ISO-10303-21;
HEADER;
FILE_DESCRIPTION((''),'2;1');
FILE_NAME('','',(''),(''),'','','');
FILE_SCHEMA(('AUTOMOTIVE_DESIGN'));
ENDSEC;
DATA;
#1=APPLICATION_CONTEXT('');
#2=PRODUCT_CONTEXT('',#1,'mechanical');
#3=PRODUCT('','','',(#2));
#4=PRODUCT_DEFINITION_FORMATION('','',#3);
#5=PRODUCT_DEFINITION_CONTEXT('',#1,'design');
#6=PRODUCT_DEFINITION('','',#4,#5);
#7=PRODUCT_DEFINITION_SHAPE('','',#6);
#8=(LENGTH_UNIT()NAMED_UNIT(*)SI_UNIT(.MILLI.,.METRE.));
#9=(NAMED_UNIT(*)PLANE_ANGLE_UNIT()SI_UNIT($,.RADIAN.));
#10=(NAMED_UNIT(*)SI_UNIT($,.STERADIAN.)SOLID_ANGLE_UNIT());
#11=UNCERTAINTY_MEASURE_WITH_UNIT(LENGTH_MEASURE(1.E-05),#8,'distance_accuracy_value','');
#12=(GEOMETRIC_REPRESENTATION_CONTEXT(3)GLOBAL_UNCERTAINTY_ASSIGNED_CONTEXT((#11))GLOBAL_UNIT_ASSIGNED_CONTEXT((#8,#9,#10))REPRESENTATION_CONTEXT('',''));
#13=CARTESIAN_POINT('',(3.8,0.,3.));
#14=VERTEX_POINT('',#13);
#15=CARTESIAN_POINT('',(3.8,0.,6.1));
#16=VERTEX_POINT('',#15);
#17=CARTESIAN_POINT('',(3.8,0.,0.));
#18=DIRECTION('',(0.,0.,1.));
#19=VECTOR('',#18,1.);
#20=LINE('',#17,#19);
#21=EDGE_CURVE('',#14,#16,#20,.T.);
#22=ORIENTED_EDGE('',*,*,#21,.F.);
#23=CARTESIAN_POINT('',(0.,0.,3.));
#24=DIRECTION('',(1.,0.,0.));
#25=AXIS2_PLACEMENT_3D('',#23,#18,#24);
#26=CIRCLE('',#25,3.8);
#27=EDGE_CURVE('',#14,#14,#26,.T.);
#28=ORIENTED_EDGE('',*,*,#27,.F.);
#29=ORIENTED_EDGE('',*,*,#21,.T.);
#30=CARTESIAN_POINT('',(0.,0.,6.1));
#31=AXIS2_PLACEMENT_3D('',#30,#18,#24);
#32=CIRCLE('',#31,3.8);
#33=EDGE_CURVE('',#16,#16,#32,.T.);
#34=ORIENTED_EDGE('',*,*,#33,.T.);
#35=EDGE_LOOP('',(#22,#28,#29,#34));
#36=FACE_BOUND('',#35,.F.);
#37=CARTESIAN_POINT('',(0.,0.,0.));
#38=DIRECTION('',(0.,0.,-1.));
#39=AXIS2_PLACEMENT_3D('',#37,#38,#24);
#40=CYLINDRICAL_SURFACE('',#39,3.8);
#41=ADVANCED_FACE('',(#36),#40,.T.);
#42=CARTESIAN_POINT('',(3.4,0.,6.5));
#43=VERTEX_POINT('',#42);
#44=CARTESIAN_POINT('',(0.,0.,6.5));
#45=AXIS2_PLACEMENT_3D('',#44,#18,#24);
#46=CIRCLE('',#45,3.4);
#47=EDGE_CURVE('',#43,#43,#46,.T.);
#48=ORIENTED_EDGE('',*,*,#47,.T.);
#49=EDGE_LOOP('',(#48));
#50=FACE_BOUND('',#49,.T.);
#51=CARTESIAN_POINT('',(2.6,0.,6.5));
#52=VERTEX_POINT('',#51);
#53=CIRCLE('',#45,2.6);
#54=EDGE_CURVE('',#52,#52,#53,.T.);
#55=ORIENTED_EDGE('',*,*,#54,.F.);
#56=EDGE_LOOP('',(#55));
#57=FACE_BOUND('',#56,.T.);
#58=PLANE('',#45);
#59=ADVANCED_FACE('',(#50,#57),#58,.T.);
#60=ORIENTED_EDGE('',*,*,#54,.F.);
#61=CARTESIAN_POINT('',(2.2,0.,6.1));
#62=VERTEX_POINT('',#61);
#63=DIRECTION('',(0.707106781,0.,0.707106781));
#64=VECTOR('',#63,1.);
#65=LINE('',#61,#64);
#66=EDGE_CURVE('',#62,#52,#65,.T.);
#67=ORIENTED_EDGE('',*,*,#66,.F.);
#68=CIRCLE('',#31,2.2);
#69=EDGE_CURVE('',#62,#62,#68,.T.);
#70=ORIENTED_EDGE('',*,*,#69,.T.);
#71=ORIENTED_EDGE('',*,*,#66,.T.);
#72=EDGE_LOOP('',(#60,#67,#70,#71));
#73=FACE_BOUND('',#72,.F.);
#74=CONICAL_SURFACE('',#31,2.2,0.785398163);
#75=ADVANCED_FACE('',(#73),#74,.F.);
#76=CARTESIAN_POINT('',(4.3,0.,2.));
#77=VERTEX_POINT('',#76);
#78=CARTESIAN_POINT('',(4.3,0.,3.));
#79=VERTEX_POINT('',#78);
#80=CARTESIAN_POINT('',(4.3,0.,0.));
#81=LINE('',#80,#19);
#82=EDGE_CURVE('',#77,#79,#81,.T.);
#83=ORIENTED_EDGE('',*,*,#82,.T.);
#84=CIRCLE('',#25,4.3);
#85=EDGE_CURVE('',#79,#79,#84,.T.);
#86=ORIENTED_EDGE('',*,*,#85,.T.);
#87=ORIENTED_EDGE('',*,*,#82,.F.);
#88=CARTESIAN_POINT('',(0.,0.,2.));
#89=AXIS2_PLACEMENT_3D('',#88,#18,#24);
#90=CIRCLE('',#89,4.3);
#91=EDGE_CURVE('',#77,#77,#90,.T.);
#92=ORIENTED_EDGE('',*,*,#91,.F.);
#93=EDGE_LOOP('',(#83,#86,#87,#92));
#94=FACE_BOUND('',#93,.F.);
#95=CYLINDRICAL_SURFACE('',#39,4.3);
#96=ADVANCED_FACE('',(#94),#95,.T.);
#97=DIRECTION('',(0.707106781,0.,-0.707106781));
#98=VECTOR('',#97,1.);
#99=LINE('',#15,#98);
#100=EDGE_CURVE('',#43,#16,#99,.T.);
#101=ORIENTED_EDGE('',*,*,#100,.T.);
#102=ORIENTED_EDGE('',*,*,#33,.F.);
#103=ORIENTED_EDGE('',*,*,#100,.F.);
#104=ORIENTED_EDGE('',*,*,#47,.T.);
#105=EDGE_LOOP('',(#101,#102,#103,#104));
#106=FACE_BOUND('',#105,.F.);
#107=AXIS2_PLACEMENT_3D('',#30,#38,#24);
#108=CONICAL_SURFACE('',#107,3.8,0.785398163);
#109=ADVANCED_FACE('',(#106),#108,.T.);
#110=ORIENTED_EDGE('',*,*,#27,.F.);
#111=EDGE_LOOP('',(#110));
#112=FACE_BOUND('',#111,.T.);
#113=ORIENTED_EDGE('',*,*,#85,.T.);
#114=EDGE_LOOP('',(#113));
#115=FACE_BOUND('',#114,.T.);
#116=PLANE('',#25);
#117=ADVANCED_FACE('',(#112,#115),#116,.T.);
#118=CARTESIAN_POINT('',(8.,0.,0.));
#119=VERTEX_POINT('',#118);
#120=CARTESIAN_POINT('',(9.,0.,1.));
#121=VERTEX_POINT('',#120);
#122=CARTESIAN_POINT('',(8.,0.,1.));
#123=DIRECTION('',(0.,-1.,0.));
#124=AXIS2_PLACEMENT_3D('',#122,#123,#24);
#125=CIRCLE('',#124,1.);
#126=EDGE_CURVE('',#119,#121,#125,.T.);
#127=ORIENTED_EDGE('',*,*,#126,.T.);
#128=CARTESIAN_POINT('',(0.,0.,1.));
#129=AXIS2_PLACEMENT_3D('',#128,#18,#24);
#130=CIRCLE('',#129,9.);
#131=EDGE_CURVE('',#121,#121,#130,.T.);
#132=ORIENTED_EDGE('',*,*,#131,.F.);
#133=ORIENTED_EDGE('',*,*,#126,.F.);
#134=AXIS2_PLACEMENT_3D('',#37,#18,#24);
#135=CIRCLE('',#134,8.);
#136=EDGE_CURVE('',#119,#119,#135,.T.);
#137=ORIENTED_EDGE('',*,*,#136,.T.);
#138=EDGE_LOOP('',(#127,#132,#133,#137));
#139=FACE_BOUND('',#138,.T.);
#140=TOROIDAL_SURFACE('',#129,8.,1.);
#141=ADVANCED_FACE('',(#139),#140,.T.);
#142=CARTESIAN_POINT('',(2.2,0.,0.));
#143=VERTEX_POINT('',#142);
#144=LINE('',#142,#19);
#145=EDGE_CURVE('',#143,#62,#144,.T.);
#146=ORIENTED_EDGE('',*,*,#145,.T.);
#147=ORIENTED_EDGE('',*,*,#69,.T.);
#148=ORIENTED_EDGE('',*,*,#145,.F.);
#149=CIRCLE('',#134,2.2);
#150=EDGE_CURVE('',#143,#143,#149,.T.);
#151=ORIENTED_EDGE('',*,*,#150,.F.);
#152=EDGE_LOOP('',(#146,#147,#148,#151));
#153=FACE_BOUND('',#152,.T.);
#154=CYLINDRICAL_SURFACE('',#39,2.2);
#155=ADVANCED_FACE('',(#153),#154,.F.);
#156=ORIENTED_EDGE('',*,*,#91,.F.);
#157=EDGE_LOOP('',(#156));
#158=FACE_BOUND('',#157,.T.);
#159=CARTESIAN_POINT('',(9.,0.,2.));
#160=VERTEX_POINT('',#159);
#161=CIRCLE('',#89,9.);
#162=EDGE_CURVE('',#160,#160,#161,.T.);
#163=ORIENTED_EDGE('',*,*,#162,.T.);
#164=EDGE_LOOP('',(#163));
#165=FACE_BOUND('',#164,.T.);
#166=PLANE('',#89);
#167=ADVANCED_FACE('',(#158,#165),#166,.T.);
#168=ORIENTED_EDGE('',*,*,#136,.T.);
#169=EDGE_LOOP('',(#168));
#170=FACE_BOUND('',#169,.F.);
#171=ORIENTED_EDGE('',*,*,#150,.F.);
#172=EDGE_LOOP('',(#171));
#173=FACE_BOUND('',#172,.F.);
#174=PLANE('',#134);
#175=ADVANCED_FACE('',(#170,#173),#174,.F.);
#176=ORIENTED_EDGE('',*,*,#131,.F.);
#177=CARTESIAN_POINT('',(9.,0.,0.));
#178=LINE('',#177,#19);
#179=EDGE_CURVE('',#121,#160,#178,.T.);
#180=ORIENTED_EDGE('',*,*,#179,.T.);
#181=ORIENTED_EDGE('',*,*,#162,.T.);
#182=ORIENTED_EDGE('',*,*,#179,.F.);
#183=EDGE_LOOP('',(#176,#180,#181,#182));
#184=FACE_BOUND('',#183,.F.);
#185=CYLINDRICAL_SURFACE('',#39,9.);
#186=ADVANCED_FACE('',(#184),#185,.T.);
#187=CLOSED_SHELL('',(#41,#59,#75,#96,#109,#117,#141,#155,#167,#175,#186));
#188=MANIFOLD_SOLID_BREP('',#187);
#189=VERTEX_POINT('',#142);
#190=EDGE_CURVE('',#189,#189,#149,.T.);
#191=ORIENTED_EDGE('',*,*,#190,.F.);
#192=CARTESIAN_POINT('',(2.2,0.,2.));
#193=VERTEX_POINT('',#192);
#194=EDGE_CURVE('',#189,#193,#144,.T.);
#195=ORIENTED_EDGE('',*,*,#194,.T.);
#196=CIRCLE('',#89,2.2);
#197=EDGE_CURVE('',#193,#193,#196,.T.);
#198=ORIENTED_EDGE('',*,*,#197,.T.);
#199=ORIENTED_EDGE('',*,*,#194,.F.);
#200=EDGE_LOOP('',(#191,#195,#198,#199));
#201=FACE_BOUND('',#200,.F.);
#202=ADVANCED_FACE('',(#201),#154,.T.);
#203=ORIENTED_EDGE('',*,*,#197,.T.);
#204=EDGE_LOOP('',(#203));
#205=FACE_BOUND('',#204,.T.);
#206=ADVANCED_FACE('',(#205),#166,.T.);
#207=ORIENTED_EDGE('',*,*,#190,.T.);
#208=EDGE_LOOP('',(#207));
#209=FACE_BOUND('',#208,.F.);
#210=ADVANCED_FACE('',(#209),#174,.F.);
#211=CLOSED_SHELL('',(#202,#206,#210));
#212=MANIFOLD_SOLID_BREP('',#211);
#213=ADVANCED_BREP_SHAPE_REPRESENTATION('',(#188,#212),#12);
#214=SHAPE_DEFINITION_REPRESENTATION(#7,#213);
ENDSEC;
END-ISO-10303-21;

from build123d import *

# Parameters (mm, degrees)
F0_R     = 9
F0_R_2   = 4.3
F1_DEPTH = 2
F0_R_3   = 2.2
F0_R_4   = 3.8
F2_DEPTH = 3
F3_DEPTH = 6.5
F4_R     = 1
F5_SIZE  = 0.4


with BuildPart() as f1:
    # F0 (on Top) → F1 (new body)
    with BuildSketch(Plane.XY):
        Circle(F0_R)
        Circle(F0_R_2, mode=Mode.SUBTRACT)
    extrude(amount=F1_DEPTH)

    # F0 (on Top) → F2 (join)
    with BuildSketch(Plane.XY):
        Circle(F0_R_2)
        Circle(F0_R_4, mode=Mode.SUBTRACT)
    extrude(amount=F2_DEPTH)

    # F0 (on Top) → F3 (join)
    with BuildSketch(Plane.XY):
        Circle(F0_R_4)
        Circle(F0_R_3, mode=Mode.SUBTRACT)
    extrude(amount=F3_DEPTH)

    # F4
    f4_edges = [f1.edges().sort_by_distance(p)[0] for p in [
        (-9, 0, 0),
    ]]
    fillet(f4_edges, radius=F4_R)

    # F5
    f5_edges = [f1.edges().sort_by_distance(p)[0] for p in [
        (-3.8, 0, 6.5),
        (-2.2, 0, 6.5),
    ]]
    chamfer(f5_edges, length=F5_SIZE)


with BuildPart() as f1b:
    # F0 (on Top) → F1, piece 2 (new body)
    with BuildSketch(Plane.XY):
        Circle(F0_R_3)
    extrude(amount=F1_DEPTH)


solid = Compound([f1.part, f1b.part])
